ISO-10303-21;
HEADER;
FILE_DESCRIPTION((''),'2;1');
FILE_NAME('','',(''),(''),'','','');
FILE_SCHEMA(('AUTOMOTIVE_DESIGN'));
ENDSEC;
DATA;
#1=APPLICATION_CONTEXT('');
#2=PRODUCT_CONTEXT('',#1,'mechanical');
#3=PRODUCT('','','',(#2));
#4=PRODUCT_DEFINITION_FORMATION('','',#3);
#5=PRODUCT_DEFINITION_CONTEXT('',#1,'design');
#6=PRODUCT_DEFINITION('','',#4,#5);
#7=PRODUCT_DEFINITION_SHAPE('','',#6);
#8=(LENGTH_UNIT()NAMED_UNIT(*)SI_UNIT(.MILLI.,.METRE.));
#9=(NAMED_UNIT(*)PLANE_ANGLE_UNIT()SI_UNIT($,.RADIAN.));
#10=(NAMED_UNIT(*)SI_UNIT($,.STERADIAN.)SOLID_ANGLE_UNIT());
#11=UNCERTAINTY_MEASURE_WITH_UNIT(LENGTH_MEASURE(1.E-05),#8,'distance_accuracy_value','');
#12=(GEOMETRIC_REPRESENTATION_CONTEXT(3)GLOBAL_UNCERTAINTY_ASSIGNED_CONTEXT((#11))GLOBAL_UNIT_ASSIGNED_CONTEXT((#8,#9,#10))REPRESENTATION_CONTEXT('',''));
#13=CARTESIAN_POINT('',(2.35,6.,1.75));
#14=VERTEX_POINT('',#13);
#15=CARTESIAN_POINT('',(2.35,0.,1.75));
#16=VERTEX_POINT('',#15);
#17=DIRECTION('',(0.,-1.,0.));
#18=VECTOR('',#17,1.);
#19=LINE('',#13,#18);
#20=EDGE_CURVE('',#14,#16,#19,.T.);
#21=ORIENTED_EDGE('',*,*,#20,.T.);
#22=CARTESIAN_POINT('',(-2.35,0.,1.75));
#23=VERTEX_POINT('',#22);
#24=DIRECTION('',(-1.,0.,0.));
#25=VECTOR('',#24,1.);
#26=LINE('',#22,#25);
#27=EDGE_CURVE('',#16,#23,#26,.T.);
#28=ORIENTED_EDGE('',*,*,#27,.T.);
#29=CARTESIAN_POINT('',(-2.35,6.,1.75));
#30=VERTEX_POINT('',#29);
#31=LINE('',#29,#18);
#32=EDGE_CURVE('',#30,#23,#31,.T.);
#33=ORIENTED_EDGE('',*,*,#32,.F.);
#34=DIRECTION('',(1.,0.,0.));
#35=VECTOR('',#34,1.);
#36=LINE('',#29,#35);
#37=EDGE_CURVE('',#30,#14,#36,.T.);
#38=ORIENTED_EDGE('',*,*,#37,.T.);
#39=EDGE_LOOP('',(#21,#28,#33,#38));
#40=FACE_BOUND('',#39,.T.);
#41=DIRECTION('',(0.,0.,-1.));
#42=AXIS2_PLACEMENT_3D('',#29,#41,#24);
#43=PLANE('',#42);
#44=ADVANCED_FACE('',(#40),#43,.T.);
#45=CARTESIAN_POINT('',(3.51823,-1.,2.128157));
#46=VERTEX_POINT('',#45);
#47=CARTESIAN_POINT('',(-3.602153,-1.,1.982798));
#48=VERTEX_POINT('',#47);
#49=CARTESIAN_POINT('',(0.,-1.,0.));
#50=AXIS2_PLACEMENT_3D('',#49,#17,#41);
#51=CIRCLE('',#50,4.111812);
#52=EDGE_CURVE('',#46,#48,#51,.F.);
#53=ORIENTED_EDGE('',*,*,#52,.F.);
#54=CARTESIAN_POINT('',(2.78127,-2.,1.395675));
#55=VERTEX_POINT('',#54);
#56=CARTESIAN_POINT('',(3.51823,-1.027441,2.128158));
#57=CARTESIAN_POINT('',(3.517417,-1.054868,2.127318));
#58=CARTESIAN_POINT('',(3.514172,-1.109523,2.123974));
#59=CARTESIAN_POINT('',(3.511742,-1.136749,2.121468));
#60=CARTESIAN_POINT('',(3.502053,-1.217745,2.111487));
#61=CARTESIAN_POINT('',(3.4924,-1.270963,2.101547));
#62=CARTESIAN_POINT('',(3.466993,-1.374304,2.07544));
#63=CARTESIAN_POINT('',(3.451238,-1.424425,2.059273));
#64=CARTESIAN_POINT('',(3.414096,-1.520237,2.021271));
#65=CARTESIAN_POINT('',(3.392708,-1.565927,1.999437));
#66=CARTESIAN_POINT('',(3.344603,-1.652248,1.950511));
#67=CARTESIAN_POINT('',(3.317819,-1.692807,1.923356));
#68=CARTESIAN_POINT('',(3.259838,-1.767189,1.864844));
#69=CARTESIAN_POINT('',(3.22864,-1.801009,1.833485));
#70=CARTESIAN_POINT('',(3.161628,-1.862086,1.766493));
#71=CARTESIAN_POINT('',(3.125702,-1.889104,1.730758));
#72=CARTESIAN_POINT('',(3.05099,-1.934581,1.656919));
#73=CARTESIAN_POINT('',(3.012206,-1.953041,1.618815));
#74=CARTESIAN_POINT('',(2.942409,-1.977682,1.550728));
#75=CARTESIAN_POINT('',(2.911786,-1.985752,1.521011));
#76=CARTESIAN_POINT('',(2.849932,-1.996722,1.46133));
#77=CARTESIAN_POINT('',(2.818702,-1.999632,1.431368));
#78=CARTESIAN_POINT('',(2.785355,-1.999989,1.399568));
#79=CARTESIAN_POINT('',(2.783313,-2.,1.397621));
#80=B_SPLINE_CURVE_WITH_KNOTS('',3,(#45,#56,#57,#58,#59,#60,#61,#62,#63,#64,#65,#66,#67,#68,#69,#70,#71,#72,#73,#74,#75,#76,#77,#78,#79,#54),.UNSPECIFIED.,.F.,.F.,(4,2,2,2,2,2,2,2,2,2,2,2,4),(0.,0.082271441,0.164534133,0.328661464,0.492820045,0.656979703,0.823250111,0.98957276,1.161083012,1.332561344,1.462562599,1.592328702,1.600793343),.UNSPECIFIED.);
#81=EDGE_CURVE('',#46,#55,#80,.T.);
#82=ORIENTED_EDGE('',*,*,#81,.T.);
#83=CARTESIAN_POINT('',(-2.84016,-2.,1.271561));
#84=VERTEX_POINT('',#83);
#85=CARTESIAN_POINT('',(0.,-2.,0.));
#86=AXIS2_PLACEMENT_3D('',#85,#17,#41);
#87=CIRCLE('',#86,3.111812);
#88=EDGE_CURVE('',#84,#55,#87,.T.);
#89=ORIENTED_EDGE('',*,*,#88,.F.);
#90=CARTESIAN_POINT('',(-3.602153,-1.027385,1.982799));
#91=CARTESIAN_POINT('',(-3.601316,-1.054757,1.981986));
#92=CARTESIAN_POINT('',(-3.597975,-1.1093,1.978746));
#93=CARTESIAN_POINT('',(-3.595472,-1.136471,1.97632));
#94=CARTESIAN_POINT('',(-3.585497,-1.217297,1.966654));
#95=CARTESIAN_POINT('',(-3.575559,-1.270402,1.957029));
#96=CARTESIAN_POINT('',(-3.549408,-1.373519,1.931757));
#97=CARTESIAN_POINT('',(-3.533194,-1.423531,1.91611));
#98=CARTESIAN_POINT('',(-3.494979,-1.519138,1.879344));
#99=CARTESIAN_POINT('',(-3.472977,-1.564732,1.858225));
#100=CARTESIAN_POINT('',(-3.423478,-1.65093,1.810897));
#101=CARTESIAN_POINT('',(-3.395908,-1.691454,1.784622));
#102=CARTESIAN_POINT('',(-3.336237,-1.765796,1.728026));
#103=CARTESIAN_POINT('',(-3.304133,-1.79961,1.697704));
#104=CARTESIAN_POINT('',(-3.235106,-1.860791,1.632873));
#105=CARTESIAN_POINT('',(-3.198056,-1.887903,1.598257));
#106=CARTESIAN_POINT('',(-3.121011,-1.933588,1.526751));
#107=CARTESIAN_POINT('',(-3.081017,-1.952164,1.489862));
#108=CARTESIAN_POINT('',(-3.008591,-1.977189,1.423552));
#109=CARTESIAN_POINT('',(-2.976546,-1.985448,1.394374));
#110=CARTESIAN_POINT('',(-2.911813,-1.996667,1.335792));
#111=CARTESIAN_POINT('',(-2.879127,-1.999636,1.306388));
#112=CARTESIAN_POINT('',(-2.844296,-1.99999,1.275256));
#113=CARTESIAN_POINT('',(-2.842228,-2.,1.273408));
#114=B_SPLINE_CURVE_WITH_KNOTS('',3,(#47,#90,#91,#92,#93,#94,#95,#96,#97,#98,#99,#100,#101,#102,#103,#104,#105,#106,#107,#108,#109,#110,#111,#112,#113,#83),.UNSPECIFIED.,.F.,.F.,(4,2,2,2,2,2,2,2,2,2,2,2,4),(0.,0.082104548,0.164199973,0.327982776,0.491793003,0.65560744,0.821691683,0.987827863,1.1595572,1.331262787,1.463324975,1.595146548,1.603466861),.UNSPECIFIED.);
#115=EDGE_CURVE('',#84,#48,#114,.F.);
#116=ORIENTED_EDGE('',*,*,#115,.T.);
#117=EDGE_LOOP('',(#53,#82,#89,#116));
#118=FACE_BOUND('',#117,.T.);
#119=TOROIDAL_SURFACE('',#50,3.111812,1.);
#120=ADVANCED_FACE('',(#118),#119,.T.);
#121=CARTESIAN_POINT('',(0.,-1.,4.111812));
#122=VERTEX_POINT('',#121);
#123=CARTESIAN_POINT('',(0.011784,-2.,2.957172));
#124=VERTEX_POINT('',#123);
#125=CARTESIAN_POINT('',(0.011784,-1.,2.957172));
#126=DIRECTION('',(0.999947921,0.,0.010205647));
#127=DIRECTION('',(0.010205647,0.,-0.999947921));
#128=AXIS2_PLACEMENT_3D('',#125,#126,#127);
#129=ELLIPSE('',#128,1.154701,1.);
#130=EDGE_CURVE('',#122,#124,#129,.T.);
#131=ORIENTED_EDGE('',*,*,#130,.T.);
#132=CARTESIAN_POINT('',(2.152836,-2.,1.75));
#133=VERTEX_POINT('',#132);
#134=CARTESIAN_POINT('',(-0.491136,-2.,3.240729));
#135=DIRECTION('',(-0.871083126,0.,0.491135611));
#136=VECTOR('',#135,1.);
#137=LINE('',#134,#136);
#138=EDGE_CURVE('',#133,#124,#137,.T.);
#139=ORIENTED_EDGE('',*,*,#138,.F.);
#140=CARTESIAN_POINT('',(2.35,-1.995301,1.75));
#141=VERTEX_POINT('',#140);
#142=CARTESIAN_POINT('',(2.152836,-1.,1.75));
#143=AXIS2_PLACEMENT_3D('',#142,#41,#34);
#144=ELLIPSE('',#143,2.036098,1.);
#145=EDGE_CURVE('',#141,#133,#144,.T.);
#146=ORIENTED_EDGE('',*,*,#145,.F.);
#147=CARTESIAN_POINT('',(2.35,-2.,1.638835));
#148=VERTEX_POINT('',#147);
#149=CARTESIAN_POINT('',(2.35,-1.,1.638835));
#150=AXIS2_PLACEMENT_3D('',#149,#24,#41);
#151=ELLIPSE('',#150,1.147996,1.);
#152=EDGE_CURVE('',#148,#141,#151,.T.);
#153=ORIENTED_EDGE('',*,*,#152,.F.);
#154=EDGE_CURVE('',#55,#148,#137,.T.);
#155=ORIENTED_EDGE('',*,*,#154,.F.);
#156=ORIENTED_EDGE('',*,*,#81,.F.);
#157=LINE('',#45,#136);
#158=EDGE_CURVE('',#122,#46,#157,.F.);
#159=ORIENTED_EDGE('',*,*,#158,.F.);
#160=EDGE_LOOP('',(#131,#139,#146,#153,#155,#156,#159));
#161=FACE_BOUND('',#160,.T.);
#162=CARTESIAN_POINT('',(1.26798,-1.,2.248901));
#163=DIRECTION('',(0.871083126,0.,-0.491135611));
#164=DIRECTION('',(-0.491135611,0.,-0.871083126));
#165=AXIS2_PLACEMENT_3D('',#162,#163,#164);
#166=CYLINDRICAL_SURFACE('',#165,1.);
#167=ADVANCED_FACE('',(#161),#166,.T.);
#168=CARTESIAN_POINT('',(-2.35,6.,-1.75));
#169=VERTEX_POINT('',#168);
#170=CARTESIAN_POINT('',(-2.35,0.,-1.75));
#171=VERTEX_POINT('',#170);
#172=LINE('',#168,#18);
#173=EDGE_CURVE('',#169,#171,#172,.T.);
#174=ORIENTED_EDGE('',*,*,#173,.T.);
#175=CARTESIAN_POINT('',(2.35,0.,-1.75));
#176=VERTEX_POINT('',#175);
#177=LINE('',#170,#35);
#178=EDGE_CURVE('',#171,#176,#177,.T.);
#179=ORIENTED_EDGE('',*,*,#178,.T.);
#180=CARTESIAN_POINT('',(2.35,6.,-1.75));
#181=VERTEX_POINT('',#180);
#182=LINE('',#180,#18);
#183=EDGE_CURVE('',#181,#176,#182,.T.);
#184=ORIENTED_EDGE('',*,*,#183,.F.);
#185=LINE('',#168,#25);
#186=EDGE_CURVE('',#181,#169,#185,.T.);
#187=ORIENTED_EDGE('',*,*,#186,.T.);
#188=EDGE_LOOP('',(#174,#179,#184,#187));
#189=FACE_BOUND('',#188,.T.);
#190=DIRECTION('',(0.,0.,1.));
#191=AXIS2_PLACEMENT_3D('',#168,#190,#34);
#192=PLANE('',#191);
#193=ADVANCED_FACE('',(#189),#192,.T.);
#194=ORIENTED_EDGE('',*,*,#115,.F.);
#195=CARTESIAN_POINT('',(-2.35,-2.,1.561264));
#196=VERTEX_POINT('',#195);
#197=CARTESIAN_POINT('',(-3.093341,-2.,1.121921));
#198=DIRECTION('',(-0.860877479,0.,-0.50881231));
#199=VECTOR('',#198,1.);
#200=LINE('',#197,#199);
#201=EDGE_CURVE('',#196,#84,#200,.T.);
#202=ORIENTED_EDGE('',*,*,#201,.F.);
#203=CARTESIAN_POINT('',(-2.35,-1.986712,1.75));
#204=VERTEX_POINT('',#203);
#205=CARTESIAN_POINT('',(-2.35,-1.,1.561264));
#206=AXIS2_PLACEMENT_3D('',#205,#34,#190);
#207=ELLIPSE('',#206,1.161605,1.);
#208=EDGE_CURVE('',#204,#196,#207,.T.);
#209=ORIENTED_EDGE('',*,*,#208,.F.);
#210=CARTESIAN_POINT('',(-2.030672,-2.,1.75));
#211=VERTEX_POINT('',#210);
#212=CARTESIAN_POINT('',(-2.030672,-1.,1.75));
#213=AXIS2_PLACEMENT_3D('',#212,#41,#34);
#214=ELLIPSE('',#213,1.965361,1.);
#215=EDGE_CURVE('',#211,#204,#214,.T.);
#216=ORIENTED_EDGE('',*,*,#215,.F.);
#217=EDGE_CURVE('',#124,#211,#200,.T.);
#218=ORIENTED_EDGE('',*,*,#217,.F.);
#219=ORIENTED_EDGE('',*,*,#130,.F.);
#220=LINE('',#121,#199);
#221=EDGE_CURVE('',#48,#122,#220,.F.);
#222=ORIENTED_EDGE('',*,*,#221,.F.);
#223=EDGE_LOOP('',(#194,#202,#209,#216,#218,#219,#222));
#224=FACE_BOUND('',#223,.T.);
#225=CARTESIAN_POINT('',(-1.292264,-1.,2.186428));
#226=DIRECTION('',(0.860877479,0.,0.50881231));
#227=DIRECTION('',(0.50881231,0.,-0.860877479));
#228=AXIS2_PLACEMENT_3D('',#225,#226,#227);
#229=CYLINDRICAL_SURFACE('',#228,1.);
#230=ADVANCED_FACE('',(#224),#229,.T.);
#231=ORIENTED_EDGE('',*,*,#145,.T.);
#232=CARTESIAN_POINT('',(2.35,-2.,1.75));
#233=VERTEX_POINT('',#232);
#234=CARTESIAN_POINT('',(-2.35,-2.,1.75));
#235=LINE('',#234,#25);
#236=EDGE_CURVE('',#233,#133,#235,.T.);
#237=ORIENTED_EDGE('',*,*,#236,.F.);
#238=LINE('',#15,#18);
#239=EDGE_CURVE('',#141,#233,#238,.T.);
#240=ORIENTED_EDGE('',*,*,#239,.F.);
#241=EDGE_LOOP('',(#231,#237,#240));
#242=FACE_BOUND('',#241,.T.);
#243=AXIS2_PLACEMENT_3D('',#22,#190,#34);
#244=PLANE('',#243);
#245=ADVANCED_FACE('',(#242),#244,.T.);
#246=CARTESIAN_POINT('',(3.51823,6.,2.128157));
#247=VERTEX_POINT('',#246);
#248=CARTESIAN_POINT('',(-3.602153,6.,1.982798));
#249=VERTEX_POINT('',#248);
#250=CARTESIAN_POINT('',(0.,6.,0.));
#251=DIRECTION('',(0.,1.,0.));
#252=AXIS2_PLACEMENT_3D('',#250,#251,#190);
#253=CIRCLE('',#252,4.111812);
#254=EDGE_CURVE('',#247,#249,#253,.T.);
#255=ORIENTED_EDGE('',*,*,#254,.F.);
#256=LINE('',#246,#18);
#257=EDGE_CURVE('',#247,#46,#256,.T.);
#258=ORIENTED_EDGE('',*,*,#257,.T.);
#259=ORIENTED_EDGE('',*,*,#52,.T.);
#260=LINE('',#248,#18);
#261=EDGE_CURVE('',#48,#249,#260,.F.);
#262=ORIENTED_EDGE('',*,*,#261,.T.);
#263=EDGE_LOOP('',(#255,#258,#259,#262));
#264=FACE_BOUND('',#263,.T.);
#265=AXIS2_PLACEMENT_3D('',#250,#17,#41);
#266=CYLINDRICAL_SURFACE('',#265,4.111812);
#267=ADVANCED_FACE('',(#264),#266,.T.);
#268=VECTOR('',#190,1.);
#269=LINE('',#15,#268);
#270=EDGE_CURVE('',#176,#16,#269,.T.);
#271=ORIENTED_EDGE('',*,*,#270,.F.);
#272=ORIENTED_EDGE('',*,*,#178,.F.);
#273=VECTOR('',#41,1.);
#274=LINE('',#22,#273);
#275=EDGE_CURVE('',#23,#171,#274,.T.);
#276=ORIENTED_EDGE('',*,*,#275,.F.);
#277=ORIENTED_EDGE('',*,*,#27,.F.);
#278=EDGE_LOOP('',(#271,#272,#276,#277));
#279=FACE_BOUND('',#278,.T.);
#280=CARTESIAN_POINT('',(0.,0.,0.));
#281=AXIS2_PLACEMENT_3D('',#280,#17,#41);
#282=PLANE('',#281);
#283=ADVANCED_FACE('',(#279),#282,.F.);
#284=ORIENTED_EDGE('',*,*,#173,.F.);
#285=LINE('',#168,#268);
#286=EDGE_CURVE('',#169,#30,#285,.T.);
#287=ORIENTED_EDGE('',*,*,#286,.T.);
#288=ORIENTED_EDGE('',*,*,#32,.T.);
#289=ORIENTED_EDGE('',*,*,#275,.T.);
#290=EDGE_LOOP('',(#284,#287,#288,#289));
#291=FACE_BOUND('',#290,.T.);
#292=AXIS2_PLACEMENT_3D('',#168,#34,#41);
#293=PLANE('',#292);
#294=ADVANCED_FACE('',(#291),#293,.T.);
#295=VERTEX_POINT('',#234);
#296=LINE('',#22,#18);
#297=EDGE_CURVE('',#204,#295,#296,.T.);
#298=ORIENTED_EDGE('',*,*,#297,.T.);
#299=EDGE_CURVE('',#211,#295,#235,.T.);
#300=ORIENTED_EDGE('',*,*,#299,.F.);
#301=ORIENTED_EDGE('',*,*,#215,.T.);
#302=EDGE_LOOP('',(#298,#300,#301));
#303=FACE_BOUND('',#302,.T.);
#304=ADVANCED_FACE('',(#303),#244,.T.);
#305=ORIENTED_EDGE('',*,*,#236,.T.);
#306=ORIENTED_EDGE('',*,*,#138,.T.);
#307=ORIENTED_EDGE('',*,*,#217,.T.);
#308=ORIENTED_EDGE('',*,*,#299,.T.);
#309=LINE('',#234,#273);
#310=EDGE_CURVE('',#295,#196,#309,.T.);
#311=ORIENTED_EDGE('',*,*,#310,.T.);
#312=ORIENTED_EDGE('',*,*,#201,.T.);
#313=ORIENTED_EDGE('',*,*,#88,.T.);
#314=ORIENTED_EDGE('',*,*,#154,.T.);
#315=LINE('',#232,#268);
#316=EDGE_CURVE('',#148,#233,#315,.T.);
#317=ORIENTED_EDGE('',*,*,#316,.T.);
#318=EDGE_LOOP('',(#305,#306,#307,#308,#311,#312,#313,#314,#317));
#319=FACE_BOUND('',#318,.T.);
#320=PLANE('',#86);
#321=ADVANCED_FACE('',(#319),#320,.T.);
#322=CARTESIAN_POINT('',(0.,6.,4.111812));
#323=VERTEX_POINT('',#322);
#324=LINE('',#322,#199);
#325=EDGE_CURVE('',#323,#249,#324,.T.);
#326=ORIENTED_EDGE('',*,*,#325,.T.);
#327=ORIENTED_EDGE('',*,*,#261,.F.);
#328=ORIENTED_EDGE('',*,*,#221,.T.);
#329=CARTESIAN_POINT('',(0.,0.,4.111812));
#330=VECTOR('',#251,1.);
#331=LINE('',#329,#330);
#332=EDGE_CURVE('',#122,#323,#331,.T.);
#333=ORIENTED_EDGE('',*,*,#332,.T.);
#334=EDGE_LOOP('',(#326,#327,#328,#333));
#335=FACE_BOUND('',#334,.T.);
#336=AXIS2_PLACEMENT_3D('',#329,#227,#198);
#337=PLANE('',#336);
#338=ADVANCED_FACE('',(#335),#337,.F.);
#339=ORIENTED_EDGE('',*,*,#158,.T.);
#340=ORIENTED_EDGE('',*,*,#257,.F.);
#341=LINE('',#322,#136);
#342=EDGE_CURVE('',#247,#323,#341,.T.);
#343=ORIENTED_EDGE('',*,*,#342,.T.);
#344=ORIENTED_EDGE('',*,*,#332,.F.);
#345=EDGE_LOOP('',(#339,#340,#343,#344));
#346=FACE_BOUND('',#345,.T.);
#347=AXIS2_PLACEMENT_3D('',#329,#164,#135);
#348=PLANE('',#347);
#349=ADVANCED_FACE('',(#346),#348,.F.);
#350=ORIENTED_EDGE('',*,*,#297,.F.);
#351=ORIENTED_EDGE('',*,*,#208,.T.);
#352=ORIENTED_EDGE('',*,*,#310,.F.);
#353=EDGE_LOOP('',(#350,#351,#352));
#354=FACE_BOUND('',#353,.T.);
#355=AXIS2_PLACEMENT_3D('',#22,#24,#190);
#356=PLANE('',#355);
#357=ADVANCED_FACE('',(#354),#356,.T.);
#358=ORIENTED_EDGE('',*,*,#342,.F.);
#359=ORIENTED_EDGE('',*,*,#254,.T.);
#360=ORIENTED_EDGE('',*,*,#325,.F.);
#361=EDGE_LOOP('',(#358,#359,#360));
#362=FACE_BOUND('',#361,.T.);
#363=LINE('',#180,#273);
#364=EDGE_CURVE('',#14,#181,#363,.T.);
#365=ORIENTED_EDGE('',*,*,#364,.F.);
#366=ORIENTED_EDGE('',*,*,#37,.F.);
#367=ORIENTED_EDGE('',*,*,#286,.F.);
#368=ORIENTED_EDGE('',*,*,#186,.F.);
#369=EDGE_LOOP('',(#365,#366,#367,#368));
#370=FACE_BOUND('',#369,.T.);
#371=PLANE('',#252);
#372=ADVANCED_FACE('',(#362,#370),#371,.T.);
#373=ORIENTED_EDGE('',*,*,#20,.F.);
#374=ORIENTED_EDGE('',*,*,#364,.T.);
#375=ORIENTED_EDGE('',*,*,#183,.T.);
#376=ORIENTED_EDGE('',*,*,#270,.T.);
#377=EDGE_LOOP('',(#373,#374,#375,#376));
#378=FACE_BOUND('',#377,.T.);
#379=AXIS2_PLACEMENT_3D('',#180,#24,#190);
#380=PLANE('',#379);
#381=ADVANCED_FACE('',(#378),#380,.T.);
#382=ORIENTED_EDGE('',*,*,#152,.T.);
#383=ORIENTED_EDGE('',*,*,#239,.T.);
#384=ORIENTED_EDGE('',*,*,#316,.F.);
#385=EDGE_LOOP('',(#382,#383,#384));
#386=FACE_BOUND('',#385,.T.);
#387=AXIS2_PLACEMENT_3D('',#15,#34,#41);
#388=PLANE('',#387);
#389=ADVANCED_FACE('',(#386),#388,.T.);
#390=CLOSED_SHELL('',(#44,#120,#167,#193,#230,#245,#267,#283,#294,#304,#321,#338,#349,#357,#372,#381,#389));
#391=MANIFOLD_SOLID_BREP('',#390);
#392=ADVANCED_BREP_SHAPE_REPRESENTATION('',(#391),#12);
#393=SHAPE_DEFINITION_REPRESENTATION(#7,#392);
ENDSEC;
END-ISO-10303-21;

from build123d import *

# Parameters (mm, degrees)
SKETCH1_R           = 4.111811984
SKETCH1_W           = 4.7
SKETCH1_H           = 3.5
BOSS_EXTRUDE1_DEPTH = 6
CUT_EXTRUDE1_DEPTH  = 6
BOSS_EXTRUDE2_START = 2
SKETCH4_W           = 4.7
SKETCH4_H           = 3.5
BOSS_EXTRUDE2_DEPTH = 2
FILLET1_R           = 1
SKETCH5_W           = 4.7
SKETCH5_H           = 3.5
BOSS_EXTRUDE3_DEPTH = 2


with BuildPart() as part:
    # Sketch1 → Boss-Extrude1 (new body)
    with BuildSketch(Plane(origin=(0, 0, 0), x_dir=(1, 0, 0), z_dir=(0, 1, 0))):
        with Locations(Location((0, 0, 0), (0, 0, 270))):
            Circle(SKETCH1_R)
        Rectangle(SKETCH1_W, SKETCH1_H, mode=Mode.SUBTRACT)
    extrude(amount=BOSS_EXTRUDE1_DEPTH)

    # Sketch3 → Cut-Extrude1 (cut)
    with BuildSketch(Plane(origin=(0, 6, 0), x_dir=(1, 0, 0), z_dir=(0, 1, 0))):
        Polygon((0, -4.111811984), (-6.956919602, 0), (0.821126852, -8.503515518), (6.0147149, -0.720584911), align=None)
    extrude(amount=-CUT_EXTRUDE1_DEPTH, mode=Mode.SUBTRACT)

    # Sketch4 → Boss-Extrude2 (add)
    with BuildSketch(Plane.XZ.offset(BOSS_EXTRUDE2_START)):
        with BuildLine():
            Line((0, 4.111811984), (-3.602153369, 1.982798248))
            ThreePointArc((-3.602153369, 1.982798248), (0.083923032, -4.11095545), (3.518230338, 2.128157202))
            Line((3.518230338, 2.128157202), (0, 4.111811984))
        make_face()
        Rectangle(SKETCH4_W, SKETCH4_H, mode=Mode.SUBTRACT)
    extrude(amount=-BOSS_EXTRUDE2_DEPTH)

    # Fillet1
    # the kernel refuses this fillet: 1 mm, written as the material it takes off along each edge
    with BuildSketch(Plane(origin=(2.152193697, -2, 5.383842759), x_dir=(0, 1, 0), z_dir=(-0.860877478620404, 0, -0.5088123099966979))) as fillet1_piece_1:
        with BuildLine():
            CenterArc((FILLET1_R, FILLET1_R), FILLET1_R, 180, 90)
            Line((0, FILLET1_R), (0, 0))
            Line((0, 0), (FILLET1_R, 0))
        make_face()
    extrude(amount=9.184281107, mode=Mode.SUBTRACT)
    with BuildSketch(Plane(origin=(0, -2, 0), x_dir=(-0.4420339671599803, 0, 0.8969983120813605), z_dir=(0.8969983120813605, 0, 0.4420339671599803))) as fillet1_piece_2:
        with BuildLine():
            CenterArc((4.111811984 - FILLET1_R, -FILLET1_R), FILLET1_R, 0, 90)
            Line((4.111811984 - FILLET1_R, 0), (4.111811984, 0))
            Line((4.111811984, 0), (4.111811984, -FILLET1_R))
        make_face()
    revolve(axis=Axis((0, -2, 0), (0, -1, 0)), revolution_arc=309.871545739, mode=Mode.SUBTRACT)
    with BuildSketch(Plane(origin=(5.695938152, -2, 0.900318175), x_dir=(0, 1, 0), z_dir=(-0.8710831255255876, 0, 0.49113561103281167))) as fillet1_piece_3:
        with BuildLine():
            CenterArc((FILLET1_R, FILLET1_R), FILLET1_R, 180, 90)
            Line((0, FILLET1_R), (0, 0))
            Line((0, 0), (FILLET1_R, 0))
        make_face()
    extrude(amount=9.038914582, mode=Mode.SUBTRACT)

    # Sketch5 → Boss-Extrude3 (add)
    with BuildSketch(Plane.XZ.offset(2)):
        Rectangle(SKETCH5_W, SKETCH5_H)
    extrude(amount=-BOSS_EXTRUDE3_DEPTH)


solid = part.part
